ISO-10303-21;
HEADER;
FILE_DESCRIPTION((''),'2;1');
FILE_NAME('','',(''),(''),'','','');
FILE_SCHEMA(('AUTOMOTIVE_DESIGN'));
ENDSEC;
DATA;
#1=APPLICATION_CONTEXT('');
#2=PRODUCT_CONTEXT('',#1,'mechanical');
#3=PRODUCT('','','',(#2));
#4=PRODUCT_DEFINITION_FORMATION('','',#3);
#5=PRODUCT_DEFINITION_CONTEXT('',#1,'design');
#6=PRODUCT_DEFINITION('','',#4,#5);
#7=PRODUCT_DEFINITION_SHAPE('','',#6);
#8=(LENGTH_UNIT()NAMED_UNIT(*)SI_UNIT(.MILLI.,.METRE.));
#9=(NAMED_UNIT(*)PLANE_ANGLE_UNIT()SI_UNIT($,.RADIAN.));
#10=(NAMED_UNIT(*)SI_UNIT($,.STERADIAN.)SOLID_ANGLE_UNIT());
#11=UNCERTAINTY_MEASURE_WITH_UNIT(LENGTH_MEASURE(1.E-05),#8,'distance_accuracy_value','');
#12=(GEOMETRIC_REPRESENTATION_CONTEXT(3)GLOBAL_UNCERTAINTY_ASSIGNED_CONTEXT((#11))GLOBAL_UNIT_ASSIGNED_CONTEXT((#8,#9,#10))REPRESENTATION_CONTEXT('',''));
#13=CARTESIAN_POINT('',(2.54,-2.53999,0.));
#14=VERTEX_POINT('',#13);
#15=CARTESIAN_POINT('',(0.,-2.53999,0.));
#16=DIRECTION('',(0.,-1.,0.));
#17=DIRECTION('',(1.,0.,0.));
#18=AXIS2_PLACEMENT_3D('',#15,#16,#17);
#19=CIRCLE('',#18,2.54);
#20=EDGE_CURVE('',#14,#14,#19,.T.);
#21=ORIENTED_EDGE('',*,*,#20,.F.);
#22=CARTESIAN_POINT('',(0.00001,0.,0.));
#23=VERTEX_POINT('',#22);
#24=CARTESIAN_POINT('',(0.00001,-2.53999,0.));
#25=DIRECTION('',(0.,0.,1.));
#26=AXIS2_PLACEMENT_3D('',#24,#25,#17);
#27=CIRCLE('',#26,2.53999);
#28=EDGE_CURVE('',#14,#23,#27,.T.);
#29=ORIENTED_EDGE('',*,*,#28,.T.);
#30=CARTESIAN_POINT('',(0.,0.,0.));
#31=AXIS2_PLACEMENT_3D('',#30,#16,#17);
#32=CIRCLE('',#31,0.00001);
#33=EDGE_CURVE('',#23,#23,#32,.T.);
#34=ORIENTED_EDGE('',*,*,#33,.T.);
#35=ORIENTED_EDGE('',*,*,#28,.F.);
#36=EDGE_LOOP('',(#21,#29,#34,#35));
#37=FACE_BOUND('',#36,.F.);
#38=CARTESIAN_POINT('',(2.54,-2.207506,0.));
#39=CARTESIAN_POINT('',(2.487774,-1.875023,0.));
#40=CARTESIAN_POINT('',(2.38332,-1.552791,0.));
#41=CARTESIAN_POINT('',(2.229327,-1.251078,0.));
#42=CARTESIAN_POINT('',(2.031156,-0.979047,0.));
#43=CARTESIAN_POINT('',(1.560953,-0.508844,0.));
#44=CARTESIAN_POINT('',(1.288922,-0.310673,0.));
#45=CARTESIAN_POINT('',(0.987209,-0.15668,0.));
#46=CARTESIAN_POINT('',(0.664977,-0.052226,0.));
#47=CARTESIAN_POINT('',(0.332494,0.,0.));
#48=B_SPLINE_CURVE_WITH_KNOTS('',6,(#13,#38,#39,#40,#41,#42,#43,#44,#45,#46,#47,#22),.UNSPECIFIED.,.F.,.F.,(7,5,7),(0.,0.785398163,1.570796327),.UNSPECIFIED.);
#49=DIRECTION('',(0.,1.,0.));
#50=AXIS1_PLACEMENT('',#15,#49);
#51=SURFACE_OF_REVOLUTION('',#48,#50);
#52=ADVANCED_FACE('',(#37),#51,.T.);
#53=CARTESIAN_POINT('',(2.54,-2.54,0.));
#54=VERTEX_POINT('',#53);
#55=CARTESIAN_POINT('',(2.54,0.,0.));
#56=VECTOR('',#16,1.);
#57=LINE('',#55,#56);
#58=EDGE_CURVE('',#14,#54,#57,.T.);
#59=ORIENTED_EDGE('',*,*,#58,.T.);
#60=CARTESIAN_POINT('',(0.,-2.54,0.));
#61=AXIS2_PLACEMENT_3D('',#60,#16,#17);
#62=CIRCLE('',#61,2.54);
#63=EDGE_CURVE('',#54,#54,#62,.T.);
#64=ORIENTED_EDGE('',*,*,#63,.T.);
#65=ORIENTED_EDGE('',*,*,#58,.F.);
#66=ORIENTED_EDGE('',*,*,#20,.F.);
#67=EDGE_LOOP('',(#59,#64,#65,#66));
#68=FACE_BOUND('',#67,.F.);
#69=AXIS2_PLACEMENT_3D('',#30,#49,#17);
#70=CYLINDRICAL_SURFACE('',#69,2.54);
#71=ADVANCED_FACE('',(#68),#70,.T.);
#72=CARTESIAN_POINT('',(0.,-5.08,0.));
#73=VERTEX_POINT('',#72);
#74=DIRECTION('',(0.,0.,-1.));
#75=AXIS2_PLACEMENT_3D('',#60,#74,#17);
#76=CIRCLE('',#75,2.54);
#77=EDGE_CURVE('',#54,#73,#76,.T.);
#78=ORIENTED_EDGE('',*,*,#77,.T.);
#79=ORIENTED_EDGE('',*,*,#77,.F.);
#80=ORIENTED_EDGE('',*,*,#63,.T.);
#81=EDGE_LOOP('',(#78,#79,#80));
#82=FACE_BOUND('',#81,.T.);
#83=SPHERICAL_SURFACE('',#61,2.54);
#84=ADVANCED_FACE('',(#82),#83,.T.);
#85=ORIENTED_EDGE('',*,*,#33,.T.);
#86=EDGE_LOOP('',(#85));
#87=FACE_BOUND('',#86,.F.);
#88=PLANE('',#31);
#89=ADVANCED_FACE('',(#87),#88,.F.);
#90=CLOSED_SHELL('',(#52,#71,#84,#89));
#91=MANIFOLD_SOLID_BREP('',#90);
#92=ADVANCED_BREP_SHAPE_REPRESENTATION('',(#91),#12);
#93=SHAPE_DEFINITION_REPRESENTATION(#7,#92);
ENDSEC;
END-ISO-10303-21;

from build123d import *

# Parameters (mm, degrees)
F0_R     = 2.54
F1_DEPTH = 5.08
F2_R     = 2.54
F3_R     = 2.53999


# Not quite as in the source:
# - a fillet or chamfer is up to 0.001 mm smaller than in the source, because OpenCascade refuses the exact size


with BuildPart() as f1:
    # F0 (on Front) → F1 (new body)
    with BuildSketch(Plane.XZ):
        Circle(F0_R)
    extrude(amount=F1_DEPTH)

    # F2
    f2_edges = [f1.edges().sort_by_distance(p)[0] for p in [
        (-2.54, -5.08, 0),
    ]]
    fillet(f2_edges, radius=F2_R)

    # F3 (radius 2.54 in the source; OpenCascade refuses exactly that, so slightly less here)
    f3_edges = [f1.edges().sort_by_distance(p)[0] for p in [
        (-2.54, 0, 0),
    ]]
    fillet(f3_edges, radius=F3_R)


solid = f1.part
